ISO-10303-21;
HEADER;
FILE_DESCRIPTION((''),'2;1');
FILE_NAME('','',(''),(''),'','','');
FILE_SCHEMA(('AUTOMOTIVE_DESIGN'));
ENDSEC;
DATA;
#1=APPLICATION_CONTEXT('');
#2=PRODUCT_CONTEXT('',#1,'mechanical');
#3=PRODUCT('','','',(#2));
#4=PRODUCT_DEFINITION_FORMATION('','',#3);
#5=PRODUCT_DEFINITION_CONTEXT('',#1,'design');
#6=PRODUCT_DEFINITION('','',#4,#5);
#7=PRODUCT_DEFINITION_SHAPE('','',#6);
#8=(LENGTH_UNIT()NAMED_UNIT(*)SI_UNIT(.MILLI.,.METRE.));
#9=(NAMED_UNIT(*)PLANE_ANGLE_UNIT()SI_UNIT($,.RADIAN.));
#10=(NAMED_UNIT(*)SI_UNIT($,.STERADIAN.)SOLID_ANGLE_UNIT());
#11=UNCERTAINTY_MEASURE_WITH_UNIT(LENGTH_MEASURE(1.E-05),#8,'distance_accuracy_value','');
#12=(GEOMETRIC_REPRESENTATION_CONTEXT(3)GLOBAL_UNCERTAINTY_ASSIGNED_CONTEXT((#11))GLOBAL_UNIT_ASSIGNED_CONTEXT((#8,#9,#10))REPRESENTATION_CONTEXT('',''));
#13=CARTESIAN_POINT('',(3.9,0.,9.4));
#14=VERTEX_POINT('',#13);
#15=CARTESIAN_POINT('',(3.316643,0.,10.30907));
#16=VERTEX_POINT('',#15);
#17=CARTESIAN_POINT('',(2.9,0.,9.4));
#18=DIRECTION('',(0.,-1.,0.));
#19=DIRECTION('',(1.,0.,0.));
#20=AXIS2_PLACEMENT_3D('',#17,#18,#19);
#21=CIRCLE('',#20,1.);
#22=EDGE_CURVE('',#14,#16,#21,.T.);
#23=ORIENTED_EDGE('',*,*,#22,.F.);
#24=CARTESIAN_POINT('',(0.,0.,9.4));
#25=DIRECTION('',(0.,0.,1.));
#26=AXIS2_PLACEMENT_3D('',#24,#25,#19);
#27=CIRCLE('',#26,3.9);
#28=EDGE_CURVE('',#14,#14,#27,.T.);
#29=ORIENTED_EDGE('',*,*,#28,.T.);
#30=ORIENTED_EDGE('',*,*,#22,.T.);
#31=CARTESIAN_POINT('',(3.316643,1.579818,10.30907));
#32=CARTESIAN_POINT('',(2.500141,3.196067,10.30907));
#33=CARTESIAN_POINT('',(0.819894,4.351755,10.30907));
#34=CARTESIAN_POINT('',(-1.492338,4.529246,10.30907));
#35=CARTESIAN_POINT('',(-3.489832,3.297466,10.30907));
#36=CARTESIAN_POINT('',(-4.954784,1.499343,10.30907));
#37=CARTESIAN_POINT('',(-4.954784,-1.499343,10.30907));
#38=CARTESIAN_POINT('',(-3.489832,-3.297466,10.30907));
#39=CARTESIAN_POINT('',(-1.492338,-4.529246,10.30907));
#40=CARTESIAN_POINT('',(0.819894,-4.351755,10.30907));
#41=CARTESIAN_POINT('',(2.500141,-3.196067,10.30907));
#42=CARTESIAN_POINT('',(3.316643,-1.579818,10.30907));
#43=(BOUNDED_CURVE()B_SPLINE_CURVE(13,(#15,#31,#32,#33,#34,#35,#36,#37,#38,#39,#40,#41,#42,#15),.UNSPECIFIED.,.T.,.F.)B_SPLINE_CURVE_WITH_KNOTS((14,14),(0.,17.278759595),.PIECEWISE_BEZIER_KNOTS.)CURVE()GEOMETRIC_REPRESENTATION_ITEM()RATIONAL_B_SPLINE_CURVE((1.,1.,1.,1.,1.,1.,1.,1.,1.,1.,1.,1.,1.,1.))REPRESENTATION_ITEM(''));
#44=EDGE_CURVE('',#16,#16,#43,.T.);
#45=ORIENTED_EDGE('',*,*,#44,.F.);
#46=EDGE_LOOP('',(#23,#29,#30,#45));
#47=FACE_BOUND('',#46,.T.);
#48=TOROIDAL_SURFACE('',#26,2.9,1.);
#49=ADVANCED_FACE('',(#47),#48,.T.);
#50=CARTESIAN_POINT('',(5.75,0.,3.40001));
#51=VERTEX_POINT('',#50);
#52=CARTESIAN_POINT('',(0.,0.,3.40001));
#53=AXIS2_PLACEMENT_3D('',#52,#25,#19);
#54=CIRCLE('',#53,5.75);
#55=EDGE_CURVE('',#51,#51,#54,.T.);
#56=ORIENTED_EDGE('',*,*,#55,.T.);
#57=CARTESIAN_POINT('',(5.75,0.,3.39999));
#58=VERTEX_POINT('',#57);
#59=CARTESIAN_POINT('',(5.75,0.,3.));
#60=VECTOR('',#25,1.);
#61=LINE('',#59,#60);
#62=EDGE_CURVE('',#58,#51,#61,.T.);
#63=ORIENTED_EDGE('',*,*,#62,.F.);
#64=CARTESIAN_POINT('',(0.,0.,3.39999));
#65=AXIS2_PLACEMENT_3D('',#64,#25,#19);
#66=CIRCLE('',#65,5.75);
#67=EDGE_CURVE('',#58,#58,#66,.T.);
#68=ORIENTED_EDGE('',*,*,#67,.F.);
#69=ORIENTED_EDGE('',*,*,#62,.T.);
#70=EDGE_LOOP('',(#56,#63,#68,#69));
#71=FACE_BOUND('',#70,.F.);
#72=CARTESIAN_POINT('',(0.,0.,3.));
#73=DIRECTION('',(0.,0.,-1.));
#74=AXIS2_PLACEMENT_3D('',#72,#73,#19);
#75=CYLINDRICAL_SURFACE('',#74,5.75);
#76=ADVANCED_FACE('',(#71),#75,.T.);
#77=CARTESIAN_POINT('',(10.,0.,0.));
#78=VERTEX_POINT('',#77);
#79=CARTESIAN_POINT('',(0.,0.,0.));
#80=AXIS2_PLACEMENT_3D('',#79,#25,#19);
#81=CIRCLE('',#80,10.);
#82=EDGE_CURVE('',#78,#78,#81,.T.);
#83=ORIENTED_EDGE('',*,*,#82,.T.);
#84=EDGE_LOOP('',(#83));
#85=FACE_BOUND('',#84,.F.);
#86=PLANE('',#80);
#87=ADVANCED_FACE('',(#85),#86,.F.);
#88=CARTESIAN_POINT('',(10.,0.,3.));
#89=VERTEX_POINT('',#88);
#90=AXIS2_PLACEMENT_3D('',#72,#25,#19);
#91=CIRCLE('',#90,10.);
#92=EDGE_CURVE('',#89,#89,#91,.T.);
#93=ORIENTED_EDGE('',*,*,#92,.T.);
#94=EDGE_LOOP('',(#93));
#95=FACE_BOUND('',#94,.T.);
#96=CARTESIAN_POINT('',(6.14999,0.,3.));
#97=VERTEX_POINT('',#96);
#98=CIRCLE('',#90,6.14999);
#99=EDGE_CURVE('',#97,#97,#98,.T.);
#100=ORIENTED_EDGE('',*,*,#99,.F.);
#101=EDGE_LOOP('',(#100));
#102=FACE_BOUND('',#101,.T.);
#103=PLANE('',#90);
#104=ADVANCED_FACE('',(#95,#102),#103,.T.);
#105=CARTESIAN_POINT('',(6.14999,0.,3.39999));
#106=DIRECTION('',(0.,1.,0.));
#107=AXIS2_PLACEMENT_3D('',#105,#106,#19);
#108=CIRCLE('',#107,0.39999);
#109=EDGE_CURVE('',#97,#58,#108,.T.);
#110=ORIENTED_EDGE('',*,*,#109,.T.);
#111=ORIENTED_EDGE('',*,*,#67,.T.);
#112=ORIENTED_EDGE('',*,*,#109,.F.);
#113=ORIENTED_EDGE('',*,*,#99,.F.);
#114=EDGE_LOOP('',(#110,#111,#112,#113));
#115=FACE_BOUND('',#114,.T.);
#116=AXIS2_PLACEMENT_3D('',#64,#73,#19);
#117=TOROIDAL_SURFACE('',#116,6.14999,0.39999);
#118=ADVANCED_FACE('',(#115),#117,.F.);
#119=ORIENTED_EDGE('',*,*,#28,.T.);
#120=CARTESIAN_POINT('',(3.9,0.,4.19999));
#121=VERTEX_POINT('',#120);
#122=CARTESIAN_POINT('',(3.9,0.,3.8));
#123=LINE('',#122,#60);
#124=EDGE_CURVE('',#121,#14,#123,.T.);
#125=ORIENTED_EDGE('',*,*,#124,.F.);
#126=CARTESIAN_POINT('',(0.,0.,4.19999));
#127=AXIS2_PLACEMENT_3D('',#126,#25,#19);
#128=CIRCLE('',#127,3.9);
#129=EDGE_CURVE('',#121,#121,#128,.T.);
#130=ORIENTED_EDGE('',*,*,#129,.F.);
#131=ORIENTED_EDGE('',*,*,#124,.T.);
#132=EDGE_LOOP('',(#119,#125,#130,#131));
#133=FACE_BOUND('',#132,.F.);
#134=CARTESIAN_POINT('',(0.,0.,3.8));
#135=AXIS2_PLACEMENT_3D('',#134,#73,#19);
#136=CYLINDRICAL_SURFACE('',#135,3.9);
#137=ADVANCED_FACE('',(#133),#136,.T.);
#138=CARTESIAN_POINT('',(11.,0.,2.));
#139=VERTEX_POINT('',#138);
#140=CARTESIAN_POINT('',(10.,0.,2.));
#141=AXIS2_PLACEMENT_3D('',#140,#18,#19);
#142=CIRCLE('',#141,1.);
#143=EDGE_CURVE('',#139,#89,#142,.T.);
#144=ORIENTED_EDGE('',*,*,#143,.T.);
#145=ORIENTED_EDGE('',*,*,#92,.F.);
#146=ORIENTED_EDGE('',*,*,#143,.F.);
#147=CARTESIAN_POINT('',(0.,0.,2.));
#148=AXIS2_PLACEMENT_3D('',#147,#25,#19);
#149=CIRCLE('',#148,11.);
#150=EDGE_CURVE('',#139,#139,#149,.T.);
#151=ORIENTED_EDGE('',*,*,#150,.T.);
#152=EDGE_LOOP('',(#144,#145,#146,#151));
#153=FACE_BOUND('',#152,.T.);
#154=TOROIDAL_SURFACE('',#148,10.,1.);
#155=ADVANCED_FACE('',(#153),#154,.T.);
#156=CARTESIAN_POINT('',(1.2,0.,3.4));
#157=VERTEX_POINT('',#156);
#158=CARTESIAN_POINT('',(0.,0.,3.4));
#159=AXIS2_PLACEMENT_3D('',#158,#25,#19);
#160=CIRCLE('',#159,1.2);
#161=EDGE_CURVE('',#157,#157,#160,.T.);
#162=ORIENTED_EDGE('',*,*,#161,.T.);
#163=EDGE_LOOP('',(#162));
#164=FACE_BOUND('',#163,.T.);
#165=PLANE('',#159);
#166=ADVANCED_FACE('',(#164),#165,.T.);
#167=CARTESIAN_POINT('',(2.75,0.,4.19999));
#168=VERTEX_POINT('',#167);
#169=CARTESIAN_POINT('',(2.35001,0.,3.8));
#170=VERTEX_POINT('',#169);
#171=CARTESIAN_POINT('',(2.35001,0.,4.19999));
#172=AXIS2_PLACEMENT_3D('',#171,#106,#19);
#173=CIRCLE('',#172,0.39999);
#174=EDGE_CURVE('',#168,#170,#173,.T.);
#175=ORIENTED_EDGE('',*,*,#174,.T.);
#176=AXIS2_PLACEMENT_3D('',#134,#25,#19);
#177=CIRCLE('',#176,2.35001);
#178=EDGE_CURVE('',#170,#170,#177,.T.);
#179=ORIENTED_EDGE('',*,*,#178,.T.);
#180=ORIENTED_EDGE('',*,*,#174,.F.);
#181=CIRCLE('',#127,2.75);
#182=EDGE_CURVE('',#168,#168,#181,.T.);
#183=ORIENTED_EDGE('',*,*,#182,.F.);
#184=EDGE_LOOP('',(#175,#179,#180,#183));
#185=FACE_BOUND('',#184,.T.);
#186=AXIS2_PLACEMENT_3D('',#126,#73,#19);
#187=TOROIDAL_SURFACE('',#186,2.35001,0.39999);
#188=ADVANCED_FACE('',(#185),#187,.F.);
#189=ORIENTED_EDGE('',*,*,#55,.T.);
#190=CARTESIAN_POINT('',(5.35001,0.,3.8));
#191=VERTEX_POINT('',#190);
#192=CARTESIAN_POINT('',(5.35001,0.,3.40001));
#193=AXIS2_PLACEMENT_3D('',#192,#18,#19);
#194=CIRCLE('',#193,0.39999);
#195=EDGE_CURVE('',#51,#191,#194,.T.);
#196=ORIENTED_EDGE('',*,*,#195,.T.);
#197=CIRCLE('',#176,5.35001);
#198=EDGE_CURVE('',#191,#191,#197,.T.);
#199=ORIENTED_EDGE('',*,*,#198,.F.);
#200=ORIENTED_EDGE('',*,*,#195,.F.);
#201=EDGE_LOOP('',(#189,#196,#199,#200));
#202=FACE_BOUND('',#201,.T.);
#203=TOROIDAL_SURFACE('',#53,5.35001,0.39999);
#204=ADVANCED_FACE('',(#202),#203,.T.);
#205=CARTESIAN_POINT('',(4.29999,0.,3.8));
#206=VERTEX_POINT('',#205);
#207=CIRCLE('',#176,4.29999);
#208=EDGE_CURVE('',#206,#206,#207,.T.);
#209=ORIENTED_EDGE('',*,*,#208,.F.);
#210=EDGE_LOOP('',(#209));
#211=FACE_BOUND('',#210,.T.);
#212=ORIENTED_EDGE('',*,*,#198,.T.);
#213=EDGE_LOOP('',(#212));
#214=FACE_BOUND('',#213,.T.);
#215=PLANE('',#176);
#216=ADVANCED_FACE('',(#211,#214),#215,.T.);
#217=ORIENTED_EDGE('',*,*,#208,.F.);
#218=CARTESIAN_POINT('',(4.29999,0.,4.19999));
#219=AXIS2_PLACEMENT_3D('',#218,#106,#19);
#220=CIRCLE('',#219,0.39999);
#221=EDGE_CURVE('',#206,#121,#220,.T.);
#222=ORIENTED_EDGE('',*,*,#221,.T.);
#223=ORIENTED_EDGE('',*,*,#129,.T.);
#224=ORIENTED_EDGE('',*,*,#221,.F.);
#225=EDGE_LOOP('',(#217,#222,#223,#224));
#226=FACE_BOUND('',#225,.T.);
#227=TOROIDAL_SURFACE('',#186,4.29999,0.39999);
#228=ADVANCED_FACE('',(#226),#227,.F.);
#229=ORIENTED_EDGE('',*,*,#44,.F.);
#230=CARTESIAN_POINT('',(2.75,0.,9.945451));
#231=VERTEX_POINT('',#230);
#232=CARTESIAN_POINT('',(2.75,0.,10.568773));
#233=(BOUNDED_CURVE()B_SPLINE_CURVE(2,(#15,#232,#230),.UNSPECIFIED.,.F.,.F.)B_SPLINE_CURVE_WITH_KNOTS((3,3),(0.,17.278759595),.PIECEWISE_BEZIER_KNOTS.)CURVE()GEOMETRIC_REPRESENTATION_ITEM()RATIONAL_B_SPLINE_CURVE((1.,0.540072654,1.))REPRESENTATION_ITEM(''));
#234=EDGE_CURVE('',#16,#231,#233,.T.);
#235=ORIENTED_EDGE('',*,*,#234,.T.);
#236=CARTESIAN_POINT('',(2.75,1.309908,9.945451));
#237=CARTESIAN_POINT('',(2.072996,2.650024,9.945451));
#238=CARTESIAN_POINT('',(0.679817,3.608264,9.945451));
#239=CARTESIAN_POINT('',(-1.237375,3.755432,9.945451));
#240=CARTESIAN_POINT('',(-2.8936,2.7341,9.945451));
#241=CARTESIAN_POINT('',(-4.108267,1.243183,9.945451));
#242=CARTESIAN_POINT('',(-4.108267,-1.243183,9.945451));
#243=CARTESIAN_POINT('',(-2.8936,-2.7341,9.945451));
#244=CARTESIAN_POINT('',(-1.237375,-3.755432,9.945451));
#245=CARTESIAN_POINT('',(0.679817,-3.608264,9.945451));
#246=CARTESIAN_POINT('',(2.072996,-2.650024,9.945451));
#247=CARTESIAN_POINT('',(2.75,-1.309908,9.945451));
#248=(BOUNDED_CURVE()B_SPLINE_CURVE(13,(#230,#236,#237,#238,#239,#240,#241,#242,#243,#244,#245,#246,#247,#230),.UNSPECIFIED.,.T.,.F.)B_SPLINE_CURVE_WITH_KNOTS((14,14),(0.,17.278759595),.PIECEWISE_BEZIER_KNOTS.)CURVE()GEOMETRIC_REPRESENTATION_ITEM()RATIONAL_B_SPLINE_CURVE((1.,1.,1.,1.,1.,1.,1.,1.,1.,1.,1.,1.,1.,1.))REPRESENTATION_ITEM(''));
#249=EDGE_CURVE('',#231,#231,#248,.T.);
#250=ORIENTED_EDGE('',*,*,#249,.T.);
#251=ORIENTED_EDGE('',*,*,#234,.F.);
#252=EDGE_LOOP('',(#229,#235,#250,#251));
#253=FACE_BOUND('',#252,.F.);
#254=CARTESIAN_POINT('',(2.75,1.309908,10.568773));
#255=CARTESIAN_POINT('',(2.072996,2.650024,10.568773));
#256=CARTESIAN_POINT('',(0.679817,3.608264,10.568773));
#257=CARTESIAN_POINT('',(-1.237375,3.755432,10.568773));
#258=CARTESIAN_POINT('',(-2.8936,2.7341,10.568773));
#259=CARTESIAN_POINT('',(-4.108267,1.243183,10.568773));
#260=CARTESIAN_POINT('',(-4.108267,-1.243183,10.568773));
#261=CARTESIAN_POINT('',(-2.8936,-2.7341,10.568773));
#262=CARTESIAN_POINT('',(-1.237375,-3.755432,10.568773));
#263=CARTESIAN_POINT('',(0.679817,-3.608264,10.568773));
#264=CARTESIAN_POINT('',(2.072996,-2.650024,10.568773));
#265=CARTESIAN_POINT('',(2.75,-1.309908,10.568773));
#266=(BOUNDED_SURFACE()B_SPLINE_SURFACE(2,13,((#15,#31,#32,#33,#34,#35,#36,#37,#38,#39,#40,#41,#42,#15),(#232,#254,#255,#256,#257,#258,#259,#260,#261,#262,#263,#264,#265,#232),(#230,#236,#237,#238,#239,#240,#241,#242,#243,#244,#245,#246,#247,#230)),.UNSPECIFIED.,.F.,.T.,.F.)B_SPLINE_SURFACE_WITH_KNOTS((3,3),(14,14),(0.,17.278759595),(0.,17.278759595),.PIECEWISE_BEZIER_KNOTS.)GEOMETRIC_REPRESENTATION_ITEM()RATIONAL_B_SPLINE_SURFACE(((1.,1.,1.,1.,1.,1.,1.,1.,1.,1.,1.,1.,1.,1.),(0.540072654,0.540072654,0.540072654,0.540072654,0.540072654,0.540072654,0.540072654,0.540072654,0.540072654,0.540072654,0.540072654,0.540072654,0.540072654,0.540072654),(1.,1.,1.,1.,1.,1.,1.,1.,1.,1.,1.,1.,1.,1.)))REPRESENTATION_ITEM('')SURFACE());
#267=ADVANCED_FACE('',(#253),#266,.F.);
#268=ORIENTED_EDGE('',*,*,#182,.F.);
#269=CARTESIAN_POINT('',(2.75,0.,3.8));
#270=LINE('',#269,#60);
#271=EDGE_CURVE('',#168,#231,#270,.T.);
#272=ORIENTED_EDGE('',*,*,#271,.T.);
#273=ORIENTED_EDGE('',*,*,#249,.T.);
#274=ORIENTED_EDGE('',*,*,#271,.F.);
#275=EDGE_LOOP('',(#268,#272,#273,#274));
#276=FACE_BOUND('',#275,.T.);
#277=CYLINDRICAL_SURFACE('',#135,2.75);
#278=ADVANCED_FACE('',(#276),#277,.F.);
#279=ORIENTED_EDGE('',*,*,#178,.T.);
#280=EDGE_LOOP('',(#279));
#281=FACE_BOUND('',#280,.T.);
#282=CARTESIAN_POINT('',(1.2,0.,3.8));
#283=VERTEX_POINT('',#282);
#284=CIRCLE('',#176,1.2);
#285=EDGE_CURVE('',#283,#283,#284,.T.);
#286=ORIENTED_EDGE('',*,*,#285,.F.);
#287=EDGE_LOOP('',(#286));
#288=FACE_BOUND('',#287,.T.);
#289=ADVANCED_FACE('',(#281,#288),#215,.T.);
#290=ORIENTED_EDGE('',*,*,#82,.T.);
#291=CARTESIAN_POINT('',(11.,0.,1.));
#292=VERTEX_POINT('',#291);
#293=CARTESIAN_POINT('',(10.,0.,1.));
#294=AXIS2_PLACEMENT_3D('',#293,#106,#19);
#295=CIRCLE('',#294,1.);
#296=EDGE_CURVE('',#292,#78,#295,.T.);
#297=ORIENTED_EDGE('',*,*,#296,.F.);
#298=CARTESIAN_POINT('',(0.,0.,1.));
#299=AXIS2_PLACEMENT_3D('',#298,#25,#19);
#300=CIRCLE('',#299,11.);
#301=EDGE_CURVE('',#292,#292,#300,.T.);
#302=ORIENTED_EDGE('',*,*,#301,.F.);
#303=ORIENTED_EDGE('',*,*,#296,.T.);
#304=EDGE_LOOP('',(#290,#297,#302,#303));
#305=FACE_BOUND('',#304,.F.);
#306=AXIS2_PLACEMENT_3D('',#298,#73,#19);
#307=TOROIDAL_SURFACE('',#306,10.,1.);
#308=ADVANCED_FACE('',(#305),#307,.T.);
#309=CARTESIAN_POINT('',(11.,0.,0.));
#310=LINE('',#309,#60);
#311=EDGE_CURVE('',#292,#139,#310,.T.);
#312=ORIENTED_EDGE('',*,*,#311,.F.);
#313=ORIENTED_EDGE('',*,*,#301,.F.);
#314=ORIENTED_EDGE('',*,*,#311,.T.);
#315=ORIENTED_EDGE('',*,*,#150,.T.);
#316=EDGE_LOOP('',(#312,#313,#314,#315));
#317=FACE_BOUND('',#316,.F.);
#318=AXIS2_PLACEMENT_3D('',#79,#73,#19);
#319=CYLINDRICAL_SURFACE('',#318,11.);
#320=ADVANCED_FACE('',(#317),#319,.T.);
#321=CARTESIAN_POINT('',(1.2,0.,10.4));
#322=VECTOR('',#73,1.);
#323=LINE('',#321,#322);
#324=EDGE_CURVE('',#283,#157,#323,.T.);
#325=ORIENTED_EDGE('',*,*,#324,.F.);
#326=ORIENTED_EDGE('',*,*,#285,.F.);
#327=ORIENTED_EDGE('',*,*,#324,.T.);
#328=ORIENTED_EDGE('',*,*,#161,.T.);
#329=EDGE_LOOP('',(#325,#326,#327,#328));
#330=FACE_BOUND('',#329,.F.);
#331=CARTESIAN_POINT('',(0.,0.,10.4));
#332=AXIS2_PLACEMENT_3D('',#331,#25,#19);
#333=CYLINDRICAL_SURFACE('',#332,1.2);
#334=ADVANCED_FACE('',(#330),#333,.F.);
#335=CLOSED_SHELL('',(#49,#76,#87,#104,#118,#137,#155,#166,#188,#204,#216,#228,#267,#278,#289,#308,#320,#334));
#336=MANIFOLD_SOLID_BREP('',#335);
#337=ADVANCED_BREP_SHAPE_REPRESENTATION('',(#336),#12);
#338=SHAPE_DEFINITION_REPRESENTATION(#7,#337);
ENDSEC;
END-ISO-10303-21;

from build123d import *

# Parameters (mm, degrees)
F0_R      = 11
F1_DEPTH  = 3
F2_R      = 5.75
F3_DEPTH  = 0.8
F4_R      = 3.9
F4_R_2    = 2.75
F5_DEPTH  = 6.6
F8_R      = 2.4
F8_R_2    = 2
F9_DEPTH  = 0.6
F6_R      = 1.2
F10_DEPTH = 7
F11_R     = 1
F12_R     = 0.39999


# Not quite as in the source:
# - a fillet or chamfer is up to 0.001 mm smaller than in the source, because OpenCascade refuses the exact size


with BuildPart() as f1:
    # F0 (on Top) → F1 (new body)
    with BuildSketch(Plane.XY):
        Circle(F0_R)
    extrude(amount=F1_DEPTH)

    # F2 (on face) → F3 (join)
    with BuildSketch(Plane.XY.offset(3)):
        Circle(F2_R)
    extrude(amount=F3_DEPTH)

    # F4 (on face) → F5 (join)
    with BuildSketch(Plane.XY.offset(3.8)):
        Circle(F4_R)
        Circle(F4_R_2, mode=Mode.SUBTRACT)
    extrude(amount=F5_DEPTH)

    # F8 (on offset) → F9 (cut)
    with BuildSketch(Plane.XY.offset(4.8)):
        Circle(F8_R)
        Circle(F8_R_2, mode=Mode.SUBTRACT)
    extrude(amount=F9_DEPTH, mode=Mode.SUBTRACT)

    # F6 (on face) → F10 (cut)
    with BuildSketch(Plane.XY.offset(10.4)):
        Circle(F6_R)
    extrude(amount=-F10_DEPTH, mode=Mode.SUBTRACT)

    # F11
    f11_edges = [f1.edges().sort_by_distance(p)[0] for p in [
        (-11, 0, 3),
        (-11, 0, 0),
        (-3.9, 0, 10.4),
    ]]
    fillet(f11_edges, radius=F11_R)

    # F12 (radius 0.4 in the source; OpenCascade refuses exactly that, so slightly less here)
    f12_edges = [f1.edges().sort_by_distance(p)[0] for p in [
        (-5.75, 0, 3.8),
        (-3.9, 0, 3.8),
        (-2.9, 0, 10.4),
        (-2.75, 0, 10.4),
        (-2.75, 0, 3.8),
        (-5.75, 0, 3),
    ]]
    fillet(f12_edges, radius=F12_R)


solid = f1.part
